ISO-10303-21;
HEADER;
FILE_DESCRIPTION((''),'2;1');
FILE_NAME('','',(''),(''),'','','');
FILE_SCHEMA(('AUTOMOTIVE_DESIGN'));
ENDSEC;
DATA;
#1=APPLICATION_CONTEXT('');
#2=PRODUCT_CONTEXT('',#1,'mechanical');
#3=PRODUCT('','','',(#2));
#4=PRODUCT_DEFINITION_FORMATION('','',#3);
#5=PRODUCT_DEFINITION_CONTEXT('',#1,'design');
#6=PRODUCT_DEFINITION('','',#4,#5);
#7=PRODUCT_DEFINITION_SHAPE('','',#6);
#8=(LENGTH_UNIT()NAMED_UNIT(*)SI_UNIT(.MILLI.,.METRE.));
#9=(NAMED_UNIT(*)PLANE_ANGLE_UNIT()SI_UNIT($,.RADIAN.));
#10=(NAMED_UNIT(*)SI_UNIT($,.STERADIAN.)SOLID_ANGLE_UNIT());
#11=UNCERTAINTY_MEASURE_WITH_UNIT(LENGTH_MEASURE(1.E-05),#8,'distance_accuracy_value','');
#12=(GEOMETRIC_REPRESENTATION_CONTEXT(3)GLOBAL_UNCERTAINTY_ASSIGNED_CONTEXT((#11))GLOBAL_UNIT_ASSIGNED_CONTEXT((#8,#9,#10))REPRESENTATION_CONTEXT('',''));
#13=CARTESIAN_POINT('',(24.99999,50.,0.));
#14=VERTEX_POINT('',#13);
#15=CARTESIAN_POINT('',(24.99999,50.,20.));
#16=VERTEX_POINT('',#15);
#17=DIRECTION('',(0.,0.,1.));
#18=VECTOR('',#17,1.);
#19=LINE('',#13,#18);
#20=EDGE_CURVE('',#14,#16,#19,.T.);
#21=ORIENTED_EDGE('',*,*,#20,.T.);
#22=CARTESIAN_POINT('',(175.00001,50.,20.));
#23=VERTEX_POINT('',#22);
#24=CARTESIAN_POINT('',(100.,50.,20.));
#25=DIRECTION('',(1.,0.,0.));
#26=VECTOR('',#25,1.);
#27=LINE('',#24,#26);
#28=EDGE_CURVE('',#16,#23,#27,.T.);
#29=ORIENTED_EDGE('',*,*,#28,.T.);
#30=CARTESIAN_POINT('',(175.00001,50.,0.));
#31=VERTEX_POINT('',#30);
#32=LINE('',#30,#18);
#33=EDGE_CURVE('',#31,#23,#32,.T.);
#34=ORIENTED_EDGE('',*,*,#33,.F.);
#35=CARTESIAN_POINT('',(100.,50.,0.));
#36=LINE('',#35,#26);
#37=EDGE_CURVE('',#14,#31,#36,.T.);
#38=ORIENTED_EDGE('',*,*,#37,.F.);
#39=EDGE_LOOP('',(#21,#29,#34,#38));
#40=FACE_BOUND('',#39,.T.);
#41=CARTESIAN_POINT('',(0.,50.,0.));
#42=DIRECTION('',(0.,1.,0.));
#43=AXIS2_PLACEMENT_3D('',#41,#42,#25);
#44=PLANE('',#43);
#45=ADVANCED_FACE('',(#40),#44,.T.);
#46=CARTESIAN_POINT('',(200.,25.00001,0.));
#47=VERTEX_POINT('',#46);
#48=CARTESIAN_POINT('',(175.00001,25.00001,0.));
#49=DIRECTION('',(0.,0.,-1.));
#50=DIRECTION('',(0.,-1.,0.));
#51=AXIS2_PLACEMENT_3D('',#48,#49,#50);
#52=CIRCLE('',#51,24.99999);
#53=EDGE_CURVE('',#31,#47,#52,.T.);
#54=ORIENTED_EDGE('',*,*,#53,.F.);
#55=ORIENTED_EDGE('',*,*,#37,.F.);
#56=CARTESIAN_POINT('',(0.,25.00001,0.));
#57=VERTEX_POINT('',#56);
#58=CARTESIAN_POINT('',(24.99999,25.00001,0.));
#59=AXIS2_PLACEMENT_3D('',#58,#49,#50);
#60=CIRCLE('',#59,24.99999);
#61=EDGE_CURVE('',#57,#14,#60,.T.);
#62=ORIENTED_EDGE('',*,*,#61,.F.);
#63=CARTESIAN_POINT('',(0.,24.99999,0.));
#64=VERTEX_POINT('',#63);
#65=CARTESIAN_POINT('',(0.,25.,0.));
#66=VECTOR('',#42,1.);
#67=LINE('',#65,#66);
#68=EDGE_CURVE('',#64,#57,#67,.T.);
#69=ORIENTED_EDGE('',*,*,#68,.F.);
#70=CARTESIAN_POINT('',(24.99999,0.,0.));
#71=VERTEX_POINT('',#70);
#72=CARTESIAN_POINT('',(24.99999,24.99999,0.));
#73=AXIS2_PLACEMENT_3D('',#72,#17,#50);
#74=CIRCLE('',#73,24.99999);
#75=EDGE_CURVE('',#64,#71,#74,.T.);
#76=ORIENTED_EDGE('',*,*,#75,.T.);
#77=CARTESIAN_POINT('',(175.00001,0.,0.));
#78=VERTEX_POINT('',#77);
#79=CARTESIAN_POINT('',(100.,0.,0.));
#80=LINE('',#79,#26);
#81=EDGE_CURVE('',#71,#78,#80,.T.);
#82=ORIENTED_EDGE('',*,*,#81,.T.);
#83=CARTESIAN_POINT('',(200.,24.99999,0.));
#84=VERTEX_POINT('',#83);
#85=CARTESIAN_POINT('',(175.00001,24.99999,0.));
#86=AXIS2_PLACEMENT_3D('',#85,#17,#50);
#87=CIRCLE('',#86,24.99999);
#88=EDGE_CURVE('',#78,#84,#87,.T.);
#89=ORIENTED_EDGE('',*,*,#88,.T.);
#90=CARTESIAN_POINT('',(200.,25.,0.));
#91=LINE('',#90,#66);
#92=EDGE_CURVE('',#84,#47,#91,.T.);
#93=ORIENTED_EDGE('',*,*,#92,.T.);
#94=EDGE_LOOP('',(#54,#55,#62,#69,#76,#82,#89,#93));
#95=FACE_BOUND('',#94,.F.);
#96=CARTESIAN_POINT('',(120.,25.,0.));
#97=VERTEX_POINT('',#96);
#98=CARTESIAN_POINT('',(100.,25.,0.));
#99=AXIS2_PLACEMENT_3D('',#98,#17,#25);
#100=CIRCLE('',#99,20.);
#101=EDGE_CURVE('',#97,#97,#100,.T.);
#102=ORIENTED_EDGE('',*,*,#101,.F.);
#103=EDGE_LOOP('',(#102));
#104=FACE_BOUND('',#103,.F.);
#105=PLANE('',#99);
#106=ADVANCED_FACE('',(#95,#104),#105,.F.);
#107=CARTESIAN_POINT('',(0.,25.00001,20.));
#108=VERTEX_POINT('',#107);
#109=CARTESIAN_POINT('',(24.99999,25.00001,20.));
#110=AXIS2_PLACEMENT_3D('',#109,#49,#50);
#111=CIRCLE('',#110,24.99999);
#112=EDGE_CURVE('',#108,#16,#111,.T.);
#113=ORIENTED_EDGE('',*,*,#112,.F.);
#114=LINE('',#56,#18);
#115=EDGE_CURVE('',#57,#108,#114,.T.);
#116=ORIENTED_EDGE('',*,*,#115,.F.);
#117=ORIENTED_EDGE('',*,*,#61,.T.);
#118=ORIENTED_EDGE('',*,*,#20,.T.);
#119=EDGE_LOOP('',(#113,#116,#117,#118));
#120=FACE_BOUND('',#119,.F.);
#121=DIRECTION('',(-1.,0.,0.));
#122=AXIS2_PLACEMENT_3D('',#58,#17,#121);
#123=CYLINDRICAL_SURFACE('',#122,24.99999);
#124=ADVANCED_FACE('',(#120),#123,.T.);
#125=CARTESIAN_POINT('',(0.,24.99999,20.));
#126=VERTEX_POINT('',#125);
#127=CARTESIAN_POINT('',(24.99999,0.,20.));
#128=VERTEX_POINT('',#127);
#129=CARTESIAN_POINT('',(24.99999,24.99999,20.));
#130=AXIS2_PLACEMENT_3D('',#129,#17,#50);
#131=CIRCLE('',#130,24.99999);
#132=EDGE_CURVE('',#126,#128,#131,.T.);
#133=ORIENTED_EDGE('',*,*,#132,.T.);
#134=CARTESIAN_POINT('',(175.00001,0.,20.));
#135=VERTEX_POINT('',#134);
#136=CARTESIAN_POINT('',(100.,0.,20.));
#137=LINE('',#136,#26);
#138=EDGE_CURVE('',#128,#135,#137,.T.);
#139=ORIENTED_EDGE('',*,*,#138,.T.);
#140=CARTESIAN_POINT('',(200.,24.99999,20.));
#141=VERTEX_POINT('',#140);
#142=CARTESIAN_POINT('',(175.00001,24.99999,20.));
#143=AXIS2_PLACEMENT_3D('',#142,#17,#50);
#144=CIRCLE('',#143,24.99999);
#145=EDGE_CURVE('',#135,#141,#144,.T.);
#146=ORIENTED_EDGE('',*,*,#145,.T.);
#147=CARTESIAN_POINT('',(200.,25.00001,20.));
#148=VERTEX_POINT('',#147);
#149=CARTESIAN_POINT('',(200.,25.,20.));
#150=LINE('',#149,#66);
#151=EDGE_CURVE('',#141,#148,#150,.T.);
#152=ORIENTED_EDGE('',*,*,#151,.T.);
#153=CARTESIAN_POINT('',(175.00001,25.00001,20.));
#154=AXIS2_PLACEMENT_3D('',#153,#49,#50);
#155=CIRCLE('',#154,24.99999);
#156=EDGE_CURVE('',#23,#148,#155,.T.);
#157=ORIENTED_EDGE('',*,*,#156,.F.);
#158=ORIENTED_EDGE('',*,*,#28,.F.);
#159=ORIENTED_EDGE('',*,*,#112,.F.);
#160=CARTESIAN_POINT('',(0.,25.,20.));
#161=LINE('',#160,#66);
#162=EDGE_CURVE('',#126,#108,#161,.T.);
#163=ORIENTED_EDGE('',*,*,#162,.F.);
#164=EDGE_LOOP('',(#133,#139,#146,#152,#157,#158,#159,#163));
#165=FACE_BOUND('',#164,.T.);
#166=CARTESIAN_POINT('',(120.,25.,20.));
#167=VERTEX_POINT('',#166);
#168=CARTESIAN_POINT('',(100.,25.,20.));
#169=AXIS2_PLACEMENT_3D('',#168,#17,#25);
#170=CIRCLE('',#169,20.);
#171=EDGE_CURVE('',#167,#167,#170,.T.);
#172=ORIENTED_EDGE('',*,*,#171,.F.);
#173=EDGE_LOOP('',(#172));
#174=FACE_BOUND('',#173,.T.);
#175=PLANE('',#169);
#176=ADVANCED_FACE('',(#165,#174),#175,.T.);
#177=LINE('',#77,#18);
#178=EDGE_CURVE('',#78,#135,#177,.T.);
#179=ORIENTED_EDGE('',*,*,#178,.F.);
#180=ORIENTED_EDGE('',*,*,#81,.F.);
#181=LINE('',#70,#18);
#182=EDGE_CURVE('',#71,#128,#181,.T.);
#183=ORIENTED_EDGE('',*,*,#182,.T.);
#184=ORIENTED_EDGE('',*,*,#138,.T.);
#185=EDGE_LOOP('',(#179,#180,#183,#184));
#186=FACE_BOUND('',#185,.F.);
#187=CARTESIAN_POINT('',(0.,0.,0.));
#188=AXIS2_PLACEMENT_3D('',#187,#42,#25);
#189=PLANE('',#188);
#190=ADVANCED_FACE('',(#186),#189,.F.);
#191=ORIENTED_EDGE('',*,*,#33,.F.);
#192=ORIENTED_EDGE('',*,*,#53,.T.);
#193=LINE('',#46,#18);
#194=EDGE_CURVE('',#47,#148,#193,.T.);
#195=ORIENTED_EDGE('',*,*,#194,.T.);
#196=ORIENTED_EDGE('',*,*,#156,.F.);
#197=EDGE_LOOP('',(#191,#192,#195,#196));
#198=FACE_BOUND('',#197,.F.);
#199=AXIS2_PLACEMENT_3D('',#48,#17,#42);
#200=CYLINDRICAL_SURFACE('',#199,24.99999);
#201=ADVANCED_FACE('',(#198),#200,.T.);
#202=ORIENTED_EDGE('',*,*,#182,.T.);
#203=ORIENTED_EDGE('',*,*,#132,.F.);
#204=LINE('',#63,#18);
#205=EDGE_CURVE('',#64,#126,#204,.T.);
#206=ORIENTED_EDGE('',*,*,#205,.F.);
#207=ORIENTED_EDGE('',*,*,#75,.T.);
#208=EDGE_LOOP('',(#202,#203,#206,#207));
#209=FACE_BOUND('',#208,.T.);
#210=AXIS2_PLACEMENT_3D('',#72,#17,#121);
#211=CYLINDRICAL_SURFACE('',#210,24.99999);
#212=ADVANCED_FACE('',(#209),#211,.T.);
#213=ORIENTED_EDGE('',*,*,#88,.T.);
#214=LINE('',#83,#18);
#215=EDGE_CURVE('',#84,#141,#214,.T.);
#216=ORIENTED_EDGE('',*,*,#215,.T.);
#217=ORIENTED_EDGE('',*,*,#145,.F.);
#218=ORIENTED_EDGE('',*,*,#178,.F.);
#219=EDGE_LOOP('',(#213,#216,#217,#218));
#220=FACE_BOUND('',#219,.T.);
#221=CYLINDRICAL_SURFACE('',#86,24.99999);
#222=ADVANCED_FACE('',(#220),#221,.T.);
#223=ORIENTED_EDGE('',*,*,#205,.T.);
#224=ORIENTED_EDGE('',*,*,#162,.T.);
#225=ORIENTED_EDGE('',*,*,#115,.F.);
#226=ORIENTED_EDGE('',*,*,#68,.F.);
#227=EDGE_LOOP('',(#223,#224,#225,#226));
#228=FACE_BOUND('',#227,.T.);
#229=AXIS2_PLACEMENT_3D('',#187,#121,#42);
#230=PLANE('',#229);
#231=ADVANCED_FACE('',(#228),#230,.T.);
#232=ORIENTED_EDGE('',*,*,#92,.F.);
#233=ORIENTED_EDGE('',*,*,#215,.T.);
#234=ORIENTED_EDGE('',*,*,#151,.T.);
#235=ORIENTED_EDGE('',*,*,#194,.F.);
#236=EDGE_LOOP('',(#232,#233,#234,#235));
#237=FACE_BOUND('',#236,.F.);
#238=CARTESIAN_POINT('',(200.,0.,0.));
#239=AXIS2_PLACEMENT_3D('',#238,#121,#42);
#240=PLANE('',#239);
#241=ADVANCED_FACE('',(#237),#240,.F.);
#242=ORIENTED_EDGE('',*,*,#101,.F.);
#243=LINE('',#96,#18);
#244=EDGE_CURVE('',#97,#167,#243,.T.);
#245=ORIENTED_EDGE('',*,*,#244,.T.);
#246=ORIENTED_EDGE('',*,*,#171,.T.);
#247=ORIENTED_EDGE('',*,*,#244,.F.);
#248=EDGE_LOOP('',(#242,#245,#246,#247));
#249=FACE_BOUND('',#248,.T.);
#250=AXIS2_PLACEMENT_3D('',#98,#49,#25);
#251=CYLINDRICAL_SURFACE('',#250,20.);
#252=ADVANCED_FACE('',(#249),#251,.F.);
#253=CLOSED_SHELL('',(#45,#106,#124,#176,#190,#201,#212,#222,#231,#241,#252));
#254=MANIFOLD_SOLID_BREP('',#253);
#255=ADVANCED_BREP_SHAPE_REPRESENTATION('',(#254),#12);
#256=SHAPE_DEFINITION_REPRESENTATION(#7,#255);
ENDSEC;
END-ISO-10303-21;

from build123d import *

# Parameters (mm, degrees)
F0_W     = 200
F0_H     = 50
F0_R     = 20
F1_DEPTH = 20
F2_R     = 24.99999


# Not quite as in the source:
# - a fillet or chamfer is up to 0.001 mm smaller than in the source, because OpenCascade refuses the exact size


with BuildPart() as f1:
    # F0 (on Top) → F1 (new body)
    with BuildSketch(Plane.XY):
        with Locations((100, 25)):
            Rectangle(F0_W, F0_H)
        with Locations((100, 25)):
            Circle(F0_R, mode=Mode.SUBTRACT)
    extrude(amount=F1_DEPTH)

    # F2 (radius 25 in the source; OpenCascade refuses exactly that, so slightly less here)
    f2_edges = [f1.edges().sort_by_distance(p)[0] for p in [
        (200, 0, 10),
        (200, 50, 10),
        (0, 50, 10),
        (0, 0, 10),
    ]]
    fillet(f2_edges, radius=F2_R)


solid = f1.part
